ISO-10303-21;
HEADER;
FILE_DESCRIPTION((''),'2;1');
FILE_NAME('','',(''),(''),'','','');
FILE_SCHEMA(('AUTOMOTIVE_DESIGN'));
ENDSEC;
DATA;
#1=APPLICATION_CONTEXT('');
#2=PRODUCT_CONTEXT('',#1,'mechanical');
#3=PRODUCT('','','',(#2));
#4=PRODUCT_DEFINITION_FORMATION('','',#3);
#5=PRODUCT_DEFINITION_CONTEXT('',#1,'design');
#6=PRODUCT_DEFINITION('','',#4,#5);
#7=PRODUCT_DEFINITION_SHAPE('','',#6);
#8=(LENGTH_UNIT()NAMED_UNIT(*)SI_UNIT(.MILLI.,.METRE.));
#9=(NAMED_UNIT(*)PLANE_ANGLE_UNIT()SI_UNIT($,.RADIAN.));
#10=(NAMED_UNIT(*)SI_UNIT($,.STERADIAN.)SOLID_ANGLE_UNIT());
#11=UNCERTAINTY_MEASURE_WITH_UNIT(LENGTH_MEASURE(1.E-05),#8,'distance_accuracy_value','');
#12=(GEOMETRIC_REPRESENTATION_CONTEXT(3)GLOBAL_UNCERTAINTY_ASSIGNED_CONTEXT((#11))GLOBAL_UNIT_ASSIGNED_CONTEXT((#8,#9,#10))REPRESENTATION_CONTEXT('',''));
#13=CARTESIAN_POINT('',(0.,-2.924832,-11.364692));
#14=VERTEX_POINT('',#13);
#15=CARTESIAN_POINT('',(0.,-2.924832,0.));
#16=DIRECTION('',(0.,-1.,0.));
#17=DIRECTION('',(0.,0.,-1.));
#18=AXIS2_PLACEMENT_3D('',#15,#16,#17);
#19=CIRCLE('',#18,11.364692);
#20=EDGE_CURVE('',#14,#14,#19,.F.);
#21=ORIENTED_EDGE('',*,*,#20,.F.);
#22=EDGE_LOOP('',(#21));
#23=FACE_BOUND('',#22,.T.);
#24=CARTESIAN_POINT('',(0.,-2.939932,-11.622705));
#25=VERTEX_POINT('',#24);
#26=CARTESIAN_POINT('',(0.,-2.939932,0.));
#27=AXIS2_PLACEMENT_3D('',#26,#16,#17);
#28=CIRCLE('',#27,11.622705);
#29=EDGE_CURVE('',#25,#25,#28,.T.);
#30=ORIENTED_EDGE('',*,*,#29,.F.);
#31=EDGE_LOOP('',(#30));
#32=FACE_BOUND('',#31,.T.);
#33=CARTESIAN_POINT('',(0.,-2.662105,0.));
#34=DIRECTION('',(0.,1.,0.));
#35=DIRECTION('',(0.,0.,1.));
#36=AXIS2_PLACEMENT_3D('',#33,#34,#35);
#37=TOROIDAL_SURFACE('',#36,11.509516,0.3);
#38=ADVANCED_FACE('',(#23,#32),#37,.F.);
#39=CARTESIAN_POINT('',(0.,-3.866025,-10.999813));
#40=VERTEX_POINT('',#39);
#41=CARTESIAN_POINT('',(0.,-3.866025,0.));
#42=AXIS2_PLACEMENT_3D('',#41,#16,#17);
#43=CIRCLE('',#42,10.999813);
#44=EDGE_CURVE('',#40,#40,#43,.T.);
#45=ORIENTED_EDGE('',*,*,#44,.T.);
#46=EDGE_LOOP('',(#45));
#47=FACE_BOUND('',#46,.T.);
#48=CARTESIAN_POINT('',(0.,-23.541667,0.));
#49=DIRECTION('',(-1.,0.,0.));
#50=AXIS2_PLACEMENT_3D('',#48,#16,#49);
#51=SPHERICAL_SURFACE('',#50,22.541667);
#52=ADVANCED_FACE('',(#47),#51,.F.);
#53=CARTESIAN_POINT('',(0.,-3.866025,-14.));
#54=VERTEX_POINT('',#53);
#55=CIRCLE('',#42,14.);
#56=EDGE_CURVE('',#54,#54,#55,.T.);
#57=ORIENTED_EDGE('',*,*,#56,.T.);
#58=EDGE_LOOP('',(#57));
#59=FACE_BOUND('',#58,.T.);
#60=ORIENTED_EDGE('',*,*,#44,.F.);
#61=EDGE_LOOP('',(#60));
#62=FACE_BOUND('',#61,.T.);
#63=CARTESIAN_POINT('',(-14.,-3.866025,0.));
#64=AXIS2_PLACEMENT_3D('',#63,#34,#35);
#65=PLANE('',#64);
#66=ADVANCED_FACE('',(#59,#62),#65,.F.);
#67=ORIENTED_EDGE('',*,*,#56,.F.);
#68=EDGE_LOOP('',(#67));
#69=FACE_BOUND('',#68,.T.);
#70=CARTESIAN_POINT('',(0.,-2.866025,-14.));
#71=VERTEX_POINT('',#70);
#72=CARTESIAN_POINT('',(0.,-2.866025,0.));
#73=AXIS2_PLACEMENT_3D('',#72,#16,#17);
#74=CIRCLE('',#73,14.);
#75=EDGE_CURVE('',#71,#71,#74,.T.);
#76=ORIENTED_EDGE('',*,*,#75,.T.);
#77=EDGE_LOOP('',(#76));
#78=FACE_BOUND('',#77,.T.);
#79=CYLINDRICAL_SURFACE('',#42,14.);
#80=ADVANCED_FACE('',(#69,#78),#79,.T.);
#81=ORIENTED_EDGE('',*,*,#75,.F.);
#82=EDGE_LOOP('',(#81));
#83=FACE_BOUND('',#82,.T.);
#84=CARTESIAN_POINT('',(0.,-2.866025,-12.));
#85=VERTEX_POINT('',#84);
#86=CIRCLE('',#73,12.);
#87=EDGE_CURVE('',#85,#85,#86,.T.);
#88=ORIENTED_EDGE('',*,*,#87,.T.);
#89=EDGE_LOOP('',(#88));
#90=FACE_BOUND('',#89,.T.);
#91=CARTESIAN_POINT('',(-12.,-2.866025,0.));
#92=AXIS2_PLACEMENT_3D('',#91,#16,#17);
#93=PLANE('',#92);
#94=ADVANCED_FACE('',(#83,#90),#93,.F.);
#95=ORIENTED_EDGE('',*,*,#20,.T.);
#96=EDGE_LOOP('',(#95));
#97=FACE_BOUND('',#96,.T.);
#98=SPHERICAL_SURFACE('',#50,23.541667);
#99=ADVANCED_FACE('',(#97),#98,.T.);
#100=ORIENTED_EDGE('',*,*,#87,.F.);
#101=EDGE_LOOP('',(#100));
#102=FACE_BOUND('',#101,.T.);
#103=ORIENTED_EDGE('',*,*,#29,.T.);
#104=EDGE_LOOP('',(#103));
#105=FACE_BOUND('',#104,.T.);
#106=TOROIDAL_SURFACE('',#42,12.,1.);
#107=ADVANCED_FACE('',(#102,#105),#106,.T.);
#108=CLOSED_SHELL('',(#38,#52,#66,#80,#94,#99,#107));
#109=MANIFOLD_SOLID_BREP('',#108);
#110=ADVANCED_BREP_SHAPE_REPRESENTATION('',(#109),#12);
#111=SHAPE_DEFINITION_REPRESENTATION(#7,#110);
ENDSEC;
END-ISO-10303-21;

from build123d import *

# Parameters (mm, degrees)
FILLET_1_R = 0.3


# Read off the part's stored shape, not the designer's step: Оболочка1
with BuildPart() as part:
    # Эскиз1 → Повернуть1 (revolve)
    with BuildSketch(Plane.XY, mode=Mode.PRIVATE) as revolve_1_sk:
        with BuildLine():
            Line((-12, -2.866025404), (-14, -2.866025404))
            Line((-14, -2.866025404), (-14, -3.866025404))
            Line((-14, -3.866025404), (0, -3.866025404))
            Line((0, -3.866025404), (0, 0))
            ThreePointArc((0, 0), (-5.942432162, -0.762343379), (-11.5, -3))
            ThreePointArc((-11.5, -3), (-11.741180955, -2.900099577), (-12, -2.866025404))
        make_face()
    revolve(revolve_1_sk.sketch.rotate(Axis((0, -3.866025404, 0), (0, 1, 0)), 270), axis=Axis((0, -3.866025404, 0), (0, 1, 0)))

    # Оболочка1 outline → Оболочка1 (revolve, cut)
    with BuildSketch(Plane.XY):
        with BuildLine():
            Line((0, -3.866025415), (10.999812609, -3.866025415))
            ThreePointArc((10.999812609, -3.866025415), (5.683528374, -1.728270752), (0, -1))
            Line((0, -1), (0, -3.866025415))
        make_face()
    revolve(axis=Axis((0, 0, 0), (0, 1, 0)), mode=Mode.SUBTRACT)

    # Скругление1
    fillet_1_edges = [part.edges().sort_by_distance(p)[0] for p in [
        (0, -3, 11.5),
    ]]
    fillet(fillet_1_edges, radius=FILLET_1_R)


solid = part.part
